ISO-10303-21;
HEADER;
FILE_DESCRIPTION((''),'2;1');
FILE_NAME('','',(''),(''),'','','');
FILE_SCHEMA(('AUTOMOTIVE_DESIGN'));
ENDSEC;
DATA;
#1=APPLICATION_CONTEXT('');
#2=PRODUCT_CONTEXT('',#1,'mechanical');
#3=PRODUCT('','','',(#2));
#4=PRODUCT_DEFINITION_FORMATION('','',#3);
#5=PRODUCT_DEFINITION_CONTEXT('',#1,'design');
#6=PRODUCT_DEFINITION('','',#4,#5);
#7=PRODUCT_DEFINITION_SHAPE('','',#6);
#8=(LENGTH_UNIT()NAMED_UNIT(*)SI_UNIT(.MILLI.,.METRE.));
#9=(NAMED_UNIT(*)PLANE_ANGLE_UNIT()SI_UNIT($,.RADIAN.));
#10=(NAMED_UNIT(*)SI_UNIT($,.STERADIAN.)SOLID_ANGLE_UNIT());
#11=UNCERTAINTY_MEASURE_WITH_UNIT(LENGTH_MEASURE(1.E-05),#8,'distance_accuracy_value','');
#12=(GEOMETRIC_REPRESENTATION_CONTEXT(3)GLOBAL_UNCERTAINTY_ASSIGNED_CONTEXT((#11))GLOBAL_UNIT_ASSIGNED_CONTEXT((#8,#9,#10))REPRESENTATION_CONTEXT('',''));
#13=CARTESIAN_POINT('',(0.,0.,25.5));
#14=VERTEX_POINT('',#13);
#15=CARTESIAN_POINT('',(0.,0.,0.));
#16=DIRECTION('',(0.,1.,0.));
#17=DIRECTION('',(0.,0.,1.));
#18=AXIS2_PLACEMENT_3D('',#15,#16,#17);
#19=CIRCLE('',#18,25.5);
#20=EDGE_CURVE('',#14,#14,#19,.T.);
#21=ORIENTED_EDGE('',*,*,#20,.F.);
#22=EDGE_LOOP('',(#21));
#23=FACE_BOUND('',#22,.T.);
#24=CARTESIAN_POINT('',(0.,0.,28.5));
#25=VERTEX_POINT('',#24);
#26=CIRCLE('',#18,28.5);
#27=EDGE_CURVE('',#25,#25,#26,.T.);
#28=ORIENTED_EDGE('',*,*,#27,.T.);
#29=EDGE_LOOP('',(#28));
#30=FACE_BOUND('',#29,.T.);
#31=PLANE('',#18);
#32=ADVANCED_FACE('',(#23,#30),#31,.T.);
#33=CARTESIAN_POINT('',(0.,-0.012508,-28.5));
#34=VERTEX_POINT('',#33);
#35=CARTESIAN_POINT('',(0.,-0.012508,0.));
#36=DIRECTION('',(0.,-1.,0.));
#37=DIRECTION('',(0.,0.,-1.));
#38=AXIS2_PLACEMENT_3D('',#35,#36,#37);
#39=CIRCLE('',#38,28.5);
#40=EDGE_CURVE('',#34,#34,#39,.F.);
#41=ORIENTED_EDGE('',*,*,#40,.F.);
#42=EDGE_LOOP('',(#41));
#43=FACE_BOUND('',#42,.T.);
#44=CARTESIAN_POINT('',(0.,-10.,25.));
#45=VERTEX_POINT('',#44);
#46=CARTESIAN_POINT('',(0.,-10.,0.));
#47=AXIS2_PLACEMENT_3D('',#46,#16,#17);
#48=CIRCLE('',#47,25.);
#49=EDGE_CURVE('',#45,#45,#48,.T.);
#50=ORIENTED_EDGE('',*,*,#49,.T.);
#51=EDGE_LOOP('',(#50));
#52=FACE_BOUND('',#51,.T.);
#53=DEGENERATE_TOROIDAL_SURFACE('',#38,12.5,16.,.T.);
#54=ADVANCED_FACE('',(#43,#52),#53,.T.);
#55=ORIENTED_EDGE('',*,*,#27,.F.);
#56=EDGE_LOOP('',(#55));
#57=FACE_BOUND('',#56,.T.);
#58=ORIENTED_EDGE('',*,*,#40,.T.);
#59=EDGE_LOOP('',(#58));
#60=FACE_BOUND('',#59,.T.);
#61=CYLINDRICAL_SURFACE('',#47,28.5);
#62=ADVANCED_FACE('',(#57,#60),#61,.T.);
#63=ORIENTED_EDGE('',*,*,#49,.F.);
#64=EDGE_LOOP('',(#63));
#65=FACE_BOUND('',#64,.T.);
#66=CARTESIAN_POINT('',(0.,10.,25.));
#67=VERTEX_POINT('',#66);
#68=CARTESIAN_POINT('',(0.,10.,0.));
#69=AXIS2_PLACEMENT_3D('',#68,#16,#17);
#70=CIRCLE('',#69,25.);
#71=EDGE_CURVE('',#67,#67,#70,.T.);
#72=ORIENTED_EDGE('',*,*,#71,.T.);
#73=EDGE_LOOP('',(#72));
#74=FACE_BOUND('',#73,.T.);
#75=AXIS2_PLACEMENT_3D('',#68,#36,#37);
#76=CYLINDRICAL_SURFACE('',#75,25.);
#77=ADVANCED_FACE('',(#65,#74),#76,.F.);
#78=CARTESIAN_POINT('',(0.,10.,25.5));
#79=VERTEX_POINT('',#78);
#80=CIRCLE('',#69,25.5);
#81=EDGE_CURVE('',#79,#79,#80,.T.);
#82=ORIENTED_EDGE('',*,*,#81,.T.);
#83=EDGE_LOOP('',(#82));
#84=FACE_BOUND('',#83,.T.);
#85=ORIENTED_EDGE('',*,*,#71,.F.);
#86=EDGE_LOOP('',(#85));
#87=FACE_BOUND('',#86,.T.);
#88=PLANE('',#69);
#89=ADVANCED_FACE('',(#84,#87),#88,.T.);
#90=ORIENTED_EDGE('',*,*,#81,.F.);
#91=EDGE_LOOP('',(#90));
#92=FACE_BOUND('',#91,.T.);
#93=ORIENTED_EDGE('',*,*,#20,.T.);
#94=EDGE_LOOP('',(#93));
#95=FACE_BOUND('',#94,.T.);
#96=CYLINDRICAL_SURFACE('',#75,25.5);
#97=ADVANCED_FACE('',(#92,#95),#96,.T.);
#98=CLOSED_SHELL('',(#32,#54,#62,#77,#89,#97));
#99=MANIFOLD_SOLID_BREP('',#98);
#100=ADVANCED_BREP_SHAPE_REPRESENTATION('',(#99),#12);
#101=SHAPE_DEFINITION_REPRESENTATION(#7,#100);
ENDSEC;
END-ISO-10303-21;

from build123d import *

# Parameters (mm, degrees)
SKETCH1_R           = 25.5
SKETCH1_R_2         = 25
BOSS_EXTRUDE2_DEPTH = 10
BOSS_EXTRUDE3_START = -10
SKETCH1_4_R         = 28.5
SKETCH1_4_R_2       = 25.5
SKETCH1_4_R_3       = 25
BOSS_EXTRUDE3_DEPTH = 10
FILLET1_R           = 16


with BuildPart() as part:
    # Sketch1 → Boss-Extrude2 (new body)
    with BuildSketch(Plane(origin=(0, 0, 0), x_dir=(1, 0, 0), z_dir=(0, 1, 0))):
        with Locations(Location((0, 0, 0), (0, 0, 270))):
            Circle(SKETCH1_R)
        with Locations(Location((0, 0, 0), (0, 0, 270))):
            Circle(SKETCH1_R_2, mode=Mode.SUBTRACT)
    extrude(amount=BOSS_EXTRUDE2_DEPTH)

    # Sketch1<4> → Boss-Extrude3 (add)
    # profile 1 of 2: a face of its own
    with BuildSketch(Plane(origin=(0, 0, 0), x_dir=(1, 0, 0), z_dir=(0, 1, 0)).offset(BOSS_EXTRUDE3_START)):
        with Locations(Location((0, 0, 0), (0, 0, 270))):
            Circle(SKETCH1_4_R)
        with Locations(Location((0, 0, 0), (0, 0, 270))):
            Circle(SKETCH1_4_R_2, mode=Mode.SUBTRACT)
    # profile 2 of 2: a face of its own
    with BuildSketch(Plane(origin=(0, 0, 0), x_dir=(1, 0, 0), z_dir=(0, 1, 0)).offset(BOSS_EXTRUDE3_START)):
        with Locations(Location((0, 0, 0), (0, 0, 270))):
            Circle(SKETCH1_4_R_2)
        with Locations(Location((0, 0, 0), (0, 0, 270))):
            Circle(SKETCH1_4_R_3, mode=Mode.SUBTRACT)
    extrude(amount=BOSS_EXTRUDE3_DEPTH)

    # Chamfer1: read off the stored shape, not the designer's step
    # Chamfer1 outline → Chamfer1 (revolve, cut)
    with BuildSketch(Plane.XY):
        Polygon((28.5, -6.5), (25, -10), (28.5, -10), align=None)
    revolve(axis=Axis((0, 0, 0), (0, 1, 0)), mode=Mode.SUBTRACT)

    # Fillet1
    # the kernel refuses this fillet: 16 mm, written as the material it takes off along each edge
    with BuildSketch(Plane(origin=(0, -6.5, 0), x_dir=(0, 0, 1), z_dir=(-1, 0, 0))) as fillet1_piece_1:
        with BuildLine():
            CenterArc((12.5, 6.487492178), FILLET1_R, 321.375167127, 38.624832873)
            Line((25, -3.5), (28.5, 0))
            Line((28.5, 0), (28.5, 6.487492178))
        make_face()
    revolve(axis=Axis((0, -6.5, 0), (0, 1, 0)), revolution_arc=90, mode=Mode.SUBTRACT)
    with BuildSketch(Plane(origin=(0, -6.5, 0), x_dir=(1, 0, 0), z_dir=(0, 0, 1))) as fillet1_piece_2:
        with BuildLine():
            CenterArc((12.5, 6.487492178), FILLET1_R, 321.375167127, 38.624832873)
            Line((25, -3.5), (28.5, 0))
            Line((28.5, 0), (28.5, 6.487492178))
        make_face()
    revolve(axis=Axis((0, -6.5, 0), (0, 1, 0)), revolution_arc=270, mode=Mode.SUBTRACT)


solid = part.part
